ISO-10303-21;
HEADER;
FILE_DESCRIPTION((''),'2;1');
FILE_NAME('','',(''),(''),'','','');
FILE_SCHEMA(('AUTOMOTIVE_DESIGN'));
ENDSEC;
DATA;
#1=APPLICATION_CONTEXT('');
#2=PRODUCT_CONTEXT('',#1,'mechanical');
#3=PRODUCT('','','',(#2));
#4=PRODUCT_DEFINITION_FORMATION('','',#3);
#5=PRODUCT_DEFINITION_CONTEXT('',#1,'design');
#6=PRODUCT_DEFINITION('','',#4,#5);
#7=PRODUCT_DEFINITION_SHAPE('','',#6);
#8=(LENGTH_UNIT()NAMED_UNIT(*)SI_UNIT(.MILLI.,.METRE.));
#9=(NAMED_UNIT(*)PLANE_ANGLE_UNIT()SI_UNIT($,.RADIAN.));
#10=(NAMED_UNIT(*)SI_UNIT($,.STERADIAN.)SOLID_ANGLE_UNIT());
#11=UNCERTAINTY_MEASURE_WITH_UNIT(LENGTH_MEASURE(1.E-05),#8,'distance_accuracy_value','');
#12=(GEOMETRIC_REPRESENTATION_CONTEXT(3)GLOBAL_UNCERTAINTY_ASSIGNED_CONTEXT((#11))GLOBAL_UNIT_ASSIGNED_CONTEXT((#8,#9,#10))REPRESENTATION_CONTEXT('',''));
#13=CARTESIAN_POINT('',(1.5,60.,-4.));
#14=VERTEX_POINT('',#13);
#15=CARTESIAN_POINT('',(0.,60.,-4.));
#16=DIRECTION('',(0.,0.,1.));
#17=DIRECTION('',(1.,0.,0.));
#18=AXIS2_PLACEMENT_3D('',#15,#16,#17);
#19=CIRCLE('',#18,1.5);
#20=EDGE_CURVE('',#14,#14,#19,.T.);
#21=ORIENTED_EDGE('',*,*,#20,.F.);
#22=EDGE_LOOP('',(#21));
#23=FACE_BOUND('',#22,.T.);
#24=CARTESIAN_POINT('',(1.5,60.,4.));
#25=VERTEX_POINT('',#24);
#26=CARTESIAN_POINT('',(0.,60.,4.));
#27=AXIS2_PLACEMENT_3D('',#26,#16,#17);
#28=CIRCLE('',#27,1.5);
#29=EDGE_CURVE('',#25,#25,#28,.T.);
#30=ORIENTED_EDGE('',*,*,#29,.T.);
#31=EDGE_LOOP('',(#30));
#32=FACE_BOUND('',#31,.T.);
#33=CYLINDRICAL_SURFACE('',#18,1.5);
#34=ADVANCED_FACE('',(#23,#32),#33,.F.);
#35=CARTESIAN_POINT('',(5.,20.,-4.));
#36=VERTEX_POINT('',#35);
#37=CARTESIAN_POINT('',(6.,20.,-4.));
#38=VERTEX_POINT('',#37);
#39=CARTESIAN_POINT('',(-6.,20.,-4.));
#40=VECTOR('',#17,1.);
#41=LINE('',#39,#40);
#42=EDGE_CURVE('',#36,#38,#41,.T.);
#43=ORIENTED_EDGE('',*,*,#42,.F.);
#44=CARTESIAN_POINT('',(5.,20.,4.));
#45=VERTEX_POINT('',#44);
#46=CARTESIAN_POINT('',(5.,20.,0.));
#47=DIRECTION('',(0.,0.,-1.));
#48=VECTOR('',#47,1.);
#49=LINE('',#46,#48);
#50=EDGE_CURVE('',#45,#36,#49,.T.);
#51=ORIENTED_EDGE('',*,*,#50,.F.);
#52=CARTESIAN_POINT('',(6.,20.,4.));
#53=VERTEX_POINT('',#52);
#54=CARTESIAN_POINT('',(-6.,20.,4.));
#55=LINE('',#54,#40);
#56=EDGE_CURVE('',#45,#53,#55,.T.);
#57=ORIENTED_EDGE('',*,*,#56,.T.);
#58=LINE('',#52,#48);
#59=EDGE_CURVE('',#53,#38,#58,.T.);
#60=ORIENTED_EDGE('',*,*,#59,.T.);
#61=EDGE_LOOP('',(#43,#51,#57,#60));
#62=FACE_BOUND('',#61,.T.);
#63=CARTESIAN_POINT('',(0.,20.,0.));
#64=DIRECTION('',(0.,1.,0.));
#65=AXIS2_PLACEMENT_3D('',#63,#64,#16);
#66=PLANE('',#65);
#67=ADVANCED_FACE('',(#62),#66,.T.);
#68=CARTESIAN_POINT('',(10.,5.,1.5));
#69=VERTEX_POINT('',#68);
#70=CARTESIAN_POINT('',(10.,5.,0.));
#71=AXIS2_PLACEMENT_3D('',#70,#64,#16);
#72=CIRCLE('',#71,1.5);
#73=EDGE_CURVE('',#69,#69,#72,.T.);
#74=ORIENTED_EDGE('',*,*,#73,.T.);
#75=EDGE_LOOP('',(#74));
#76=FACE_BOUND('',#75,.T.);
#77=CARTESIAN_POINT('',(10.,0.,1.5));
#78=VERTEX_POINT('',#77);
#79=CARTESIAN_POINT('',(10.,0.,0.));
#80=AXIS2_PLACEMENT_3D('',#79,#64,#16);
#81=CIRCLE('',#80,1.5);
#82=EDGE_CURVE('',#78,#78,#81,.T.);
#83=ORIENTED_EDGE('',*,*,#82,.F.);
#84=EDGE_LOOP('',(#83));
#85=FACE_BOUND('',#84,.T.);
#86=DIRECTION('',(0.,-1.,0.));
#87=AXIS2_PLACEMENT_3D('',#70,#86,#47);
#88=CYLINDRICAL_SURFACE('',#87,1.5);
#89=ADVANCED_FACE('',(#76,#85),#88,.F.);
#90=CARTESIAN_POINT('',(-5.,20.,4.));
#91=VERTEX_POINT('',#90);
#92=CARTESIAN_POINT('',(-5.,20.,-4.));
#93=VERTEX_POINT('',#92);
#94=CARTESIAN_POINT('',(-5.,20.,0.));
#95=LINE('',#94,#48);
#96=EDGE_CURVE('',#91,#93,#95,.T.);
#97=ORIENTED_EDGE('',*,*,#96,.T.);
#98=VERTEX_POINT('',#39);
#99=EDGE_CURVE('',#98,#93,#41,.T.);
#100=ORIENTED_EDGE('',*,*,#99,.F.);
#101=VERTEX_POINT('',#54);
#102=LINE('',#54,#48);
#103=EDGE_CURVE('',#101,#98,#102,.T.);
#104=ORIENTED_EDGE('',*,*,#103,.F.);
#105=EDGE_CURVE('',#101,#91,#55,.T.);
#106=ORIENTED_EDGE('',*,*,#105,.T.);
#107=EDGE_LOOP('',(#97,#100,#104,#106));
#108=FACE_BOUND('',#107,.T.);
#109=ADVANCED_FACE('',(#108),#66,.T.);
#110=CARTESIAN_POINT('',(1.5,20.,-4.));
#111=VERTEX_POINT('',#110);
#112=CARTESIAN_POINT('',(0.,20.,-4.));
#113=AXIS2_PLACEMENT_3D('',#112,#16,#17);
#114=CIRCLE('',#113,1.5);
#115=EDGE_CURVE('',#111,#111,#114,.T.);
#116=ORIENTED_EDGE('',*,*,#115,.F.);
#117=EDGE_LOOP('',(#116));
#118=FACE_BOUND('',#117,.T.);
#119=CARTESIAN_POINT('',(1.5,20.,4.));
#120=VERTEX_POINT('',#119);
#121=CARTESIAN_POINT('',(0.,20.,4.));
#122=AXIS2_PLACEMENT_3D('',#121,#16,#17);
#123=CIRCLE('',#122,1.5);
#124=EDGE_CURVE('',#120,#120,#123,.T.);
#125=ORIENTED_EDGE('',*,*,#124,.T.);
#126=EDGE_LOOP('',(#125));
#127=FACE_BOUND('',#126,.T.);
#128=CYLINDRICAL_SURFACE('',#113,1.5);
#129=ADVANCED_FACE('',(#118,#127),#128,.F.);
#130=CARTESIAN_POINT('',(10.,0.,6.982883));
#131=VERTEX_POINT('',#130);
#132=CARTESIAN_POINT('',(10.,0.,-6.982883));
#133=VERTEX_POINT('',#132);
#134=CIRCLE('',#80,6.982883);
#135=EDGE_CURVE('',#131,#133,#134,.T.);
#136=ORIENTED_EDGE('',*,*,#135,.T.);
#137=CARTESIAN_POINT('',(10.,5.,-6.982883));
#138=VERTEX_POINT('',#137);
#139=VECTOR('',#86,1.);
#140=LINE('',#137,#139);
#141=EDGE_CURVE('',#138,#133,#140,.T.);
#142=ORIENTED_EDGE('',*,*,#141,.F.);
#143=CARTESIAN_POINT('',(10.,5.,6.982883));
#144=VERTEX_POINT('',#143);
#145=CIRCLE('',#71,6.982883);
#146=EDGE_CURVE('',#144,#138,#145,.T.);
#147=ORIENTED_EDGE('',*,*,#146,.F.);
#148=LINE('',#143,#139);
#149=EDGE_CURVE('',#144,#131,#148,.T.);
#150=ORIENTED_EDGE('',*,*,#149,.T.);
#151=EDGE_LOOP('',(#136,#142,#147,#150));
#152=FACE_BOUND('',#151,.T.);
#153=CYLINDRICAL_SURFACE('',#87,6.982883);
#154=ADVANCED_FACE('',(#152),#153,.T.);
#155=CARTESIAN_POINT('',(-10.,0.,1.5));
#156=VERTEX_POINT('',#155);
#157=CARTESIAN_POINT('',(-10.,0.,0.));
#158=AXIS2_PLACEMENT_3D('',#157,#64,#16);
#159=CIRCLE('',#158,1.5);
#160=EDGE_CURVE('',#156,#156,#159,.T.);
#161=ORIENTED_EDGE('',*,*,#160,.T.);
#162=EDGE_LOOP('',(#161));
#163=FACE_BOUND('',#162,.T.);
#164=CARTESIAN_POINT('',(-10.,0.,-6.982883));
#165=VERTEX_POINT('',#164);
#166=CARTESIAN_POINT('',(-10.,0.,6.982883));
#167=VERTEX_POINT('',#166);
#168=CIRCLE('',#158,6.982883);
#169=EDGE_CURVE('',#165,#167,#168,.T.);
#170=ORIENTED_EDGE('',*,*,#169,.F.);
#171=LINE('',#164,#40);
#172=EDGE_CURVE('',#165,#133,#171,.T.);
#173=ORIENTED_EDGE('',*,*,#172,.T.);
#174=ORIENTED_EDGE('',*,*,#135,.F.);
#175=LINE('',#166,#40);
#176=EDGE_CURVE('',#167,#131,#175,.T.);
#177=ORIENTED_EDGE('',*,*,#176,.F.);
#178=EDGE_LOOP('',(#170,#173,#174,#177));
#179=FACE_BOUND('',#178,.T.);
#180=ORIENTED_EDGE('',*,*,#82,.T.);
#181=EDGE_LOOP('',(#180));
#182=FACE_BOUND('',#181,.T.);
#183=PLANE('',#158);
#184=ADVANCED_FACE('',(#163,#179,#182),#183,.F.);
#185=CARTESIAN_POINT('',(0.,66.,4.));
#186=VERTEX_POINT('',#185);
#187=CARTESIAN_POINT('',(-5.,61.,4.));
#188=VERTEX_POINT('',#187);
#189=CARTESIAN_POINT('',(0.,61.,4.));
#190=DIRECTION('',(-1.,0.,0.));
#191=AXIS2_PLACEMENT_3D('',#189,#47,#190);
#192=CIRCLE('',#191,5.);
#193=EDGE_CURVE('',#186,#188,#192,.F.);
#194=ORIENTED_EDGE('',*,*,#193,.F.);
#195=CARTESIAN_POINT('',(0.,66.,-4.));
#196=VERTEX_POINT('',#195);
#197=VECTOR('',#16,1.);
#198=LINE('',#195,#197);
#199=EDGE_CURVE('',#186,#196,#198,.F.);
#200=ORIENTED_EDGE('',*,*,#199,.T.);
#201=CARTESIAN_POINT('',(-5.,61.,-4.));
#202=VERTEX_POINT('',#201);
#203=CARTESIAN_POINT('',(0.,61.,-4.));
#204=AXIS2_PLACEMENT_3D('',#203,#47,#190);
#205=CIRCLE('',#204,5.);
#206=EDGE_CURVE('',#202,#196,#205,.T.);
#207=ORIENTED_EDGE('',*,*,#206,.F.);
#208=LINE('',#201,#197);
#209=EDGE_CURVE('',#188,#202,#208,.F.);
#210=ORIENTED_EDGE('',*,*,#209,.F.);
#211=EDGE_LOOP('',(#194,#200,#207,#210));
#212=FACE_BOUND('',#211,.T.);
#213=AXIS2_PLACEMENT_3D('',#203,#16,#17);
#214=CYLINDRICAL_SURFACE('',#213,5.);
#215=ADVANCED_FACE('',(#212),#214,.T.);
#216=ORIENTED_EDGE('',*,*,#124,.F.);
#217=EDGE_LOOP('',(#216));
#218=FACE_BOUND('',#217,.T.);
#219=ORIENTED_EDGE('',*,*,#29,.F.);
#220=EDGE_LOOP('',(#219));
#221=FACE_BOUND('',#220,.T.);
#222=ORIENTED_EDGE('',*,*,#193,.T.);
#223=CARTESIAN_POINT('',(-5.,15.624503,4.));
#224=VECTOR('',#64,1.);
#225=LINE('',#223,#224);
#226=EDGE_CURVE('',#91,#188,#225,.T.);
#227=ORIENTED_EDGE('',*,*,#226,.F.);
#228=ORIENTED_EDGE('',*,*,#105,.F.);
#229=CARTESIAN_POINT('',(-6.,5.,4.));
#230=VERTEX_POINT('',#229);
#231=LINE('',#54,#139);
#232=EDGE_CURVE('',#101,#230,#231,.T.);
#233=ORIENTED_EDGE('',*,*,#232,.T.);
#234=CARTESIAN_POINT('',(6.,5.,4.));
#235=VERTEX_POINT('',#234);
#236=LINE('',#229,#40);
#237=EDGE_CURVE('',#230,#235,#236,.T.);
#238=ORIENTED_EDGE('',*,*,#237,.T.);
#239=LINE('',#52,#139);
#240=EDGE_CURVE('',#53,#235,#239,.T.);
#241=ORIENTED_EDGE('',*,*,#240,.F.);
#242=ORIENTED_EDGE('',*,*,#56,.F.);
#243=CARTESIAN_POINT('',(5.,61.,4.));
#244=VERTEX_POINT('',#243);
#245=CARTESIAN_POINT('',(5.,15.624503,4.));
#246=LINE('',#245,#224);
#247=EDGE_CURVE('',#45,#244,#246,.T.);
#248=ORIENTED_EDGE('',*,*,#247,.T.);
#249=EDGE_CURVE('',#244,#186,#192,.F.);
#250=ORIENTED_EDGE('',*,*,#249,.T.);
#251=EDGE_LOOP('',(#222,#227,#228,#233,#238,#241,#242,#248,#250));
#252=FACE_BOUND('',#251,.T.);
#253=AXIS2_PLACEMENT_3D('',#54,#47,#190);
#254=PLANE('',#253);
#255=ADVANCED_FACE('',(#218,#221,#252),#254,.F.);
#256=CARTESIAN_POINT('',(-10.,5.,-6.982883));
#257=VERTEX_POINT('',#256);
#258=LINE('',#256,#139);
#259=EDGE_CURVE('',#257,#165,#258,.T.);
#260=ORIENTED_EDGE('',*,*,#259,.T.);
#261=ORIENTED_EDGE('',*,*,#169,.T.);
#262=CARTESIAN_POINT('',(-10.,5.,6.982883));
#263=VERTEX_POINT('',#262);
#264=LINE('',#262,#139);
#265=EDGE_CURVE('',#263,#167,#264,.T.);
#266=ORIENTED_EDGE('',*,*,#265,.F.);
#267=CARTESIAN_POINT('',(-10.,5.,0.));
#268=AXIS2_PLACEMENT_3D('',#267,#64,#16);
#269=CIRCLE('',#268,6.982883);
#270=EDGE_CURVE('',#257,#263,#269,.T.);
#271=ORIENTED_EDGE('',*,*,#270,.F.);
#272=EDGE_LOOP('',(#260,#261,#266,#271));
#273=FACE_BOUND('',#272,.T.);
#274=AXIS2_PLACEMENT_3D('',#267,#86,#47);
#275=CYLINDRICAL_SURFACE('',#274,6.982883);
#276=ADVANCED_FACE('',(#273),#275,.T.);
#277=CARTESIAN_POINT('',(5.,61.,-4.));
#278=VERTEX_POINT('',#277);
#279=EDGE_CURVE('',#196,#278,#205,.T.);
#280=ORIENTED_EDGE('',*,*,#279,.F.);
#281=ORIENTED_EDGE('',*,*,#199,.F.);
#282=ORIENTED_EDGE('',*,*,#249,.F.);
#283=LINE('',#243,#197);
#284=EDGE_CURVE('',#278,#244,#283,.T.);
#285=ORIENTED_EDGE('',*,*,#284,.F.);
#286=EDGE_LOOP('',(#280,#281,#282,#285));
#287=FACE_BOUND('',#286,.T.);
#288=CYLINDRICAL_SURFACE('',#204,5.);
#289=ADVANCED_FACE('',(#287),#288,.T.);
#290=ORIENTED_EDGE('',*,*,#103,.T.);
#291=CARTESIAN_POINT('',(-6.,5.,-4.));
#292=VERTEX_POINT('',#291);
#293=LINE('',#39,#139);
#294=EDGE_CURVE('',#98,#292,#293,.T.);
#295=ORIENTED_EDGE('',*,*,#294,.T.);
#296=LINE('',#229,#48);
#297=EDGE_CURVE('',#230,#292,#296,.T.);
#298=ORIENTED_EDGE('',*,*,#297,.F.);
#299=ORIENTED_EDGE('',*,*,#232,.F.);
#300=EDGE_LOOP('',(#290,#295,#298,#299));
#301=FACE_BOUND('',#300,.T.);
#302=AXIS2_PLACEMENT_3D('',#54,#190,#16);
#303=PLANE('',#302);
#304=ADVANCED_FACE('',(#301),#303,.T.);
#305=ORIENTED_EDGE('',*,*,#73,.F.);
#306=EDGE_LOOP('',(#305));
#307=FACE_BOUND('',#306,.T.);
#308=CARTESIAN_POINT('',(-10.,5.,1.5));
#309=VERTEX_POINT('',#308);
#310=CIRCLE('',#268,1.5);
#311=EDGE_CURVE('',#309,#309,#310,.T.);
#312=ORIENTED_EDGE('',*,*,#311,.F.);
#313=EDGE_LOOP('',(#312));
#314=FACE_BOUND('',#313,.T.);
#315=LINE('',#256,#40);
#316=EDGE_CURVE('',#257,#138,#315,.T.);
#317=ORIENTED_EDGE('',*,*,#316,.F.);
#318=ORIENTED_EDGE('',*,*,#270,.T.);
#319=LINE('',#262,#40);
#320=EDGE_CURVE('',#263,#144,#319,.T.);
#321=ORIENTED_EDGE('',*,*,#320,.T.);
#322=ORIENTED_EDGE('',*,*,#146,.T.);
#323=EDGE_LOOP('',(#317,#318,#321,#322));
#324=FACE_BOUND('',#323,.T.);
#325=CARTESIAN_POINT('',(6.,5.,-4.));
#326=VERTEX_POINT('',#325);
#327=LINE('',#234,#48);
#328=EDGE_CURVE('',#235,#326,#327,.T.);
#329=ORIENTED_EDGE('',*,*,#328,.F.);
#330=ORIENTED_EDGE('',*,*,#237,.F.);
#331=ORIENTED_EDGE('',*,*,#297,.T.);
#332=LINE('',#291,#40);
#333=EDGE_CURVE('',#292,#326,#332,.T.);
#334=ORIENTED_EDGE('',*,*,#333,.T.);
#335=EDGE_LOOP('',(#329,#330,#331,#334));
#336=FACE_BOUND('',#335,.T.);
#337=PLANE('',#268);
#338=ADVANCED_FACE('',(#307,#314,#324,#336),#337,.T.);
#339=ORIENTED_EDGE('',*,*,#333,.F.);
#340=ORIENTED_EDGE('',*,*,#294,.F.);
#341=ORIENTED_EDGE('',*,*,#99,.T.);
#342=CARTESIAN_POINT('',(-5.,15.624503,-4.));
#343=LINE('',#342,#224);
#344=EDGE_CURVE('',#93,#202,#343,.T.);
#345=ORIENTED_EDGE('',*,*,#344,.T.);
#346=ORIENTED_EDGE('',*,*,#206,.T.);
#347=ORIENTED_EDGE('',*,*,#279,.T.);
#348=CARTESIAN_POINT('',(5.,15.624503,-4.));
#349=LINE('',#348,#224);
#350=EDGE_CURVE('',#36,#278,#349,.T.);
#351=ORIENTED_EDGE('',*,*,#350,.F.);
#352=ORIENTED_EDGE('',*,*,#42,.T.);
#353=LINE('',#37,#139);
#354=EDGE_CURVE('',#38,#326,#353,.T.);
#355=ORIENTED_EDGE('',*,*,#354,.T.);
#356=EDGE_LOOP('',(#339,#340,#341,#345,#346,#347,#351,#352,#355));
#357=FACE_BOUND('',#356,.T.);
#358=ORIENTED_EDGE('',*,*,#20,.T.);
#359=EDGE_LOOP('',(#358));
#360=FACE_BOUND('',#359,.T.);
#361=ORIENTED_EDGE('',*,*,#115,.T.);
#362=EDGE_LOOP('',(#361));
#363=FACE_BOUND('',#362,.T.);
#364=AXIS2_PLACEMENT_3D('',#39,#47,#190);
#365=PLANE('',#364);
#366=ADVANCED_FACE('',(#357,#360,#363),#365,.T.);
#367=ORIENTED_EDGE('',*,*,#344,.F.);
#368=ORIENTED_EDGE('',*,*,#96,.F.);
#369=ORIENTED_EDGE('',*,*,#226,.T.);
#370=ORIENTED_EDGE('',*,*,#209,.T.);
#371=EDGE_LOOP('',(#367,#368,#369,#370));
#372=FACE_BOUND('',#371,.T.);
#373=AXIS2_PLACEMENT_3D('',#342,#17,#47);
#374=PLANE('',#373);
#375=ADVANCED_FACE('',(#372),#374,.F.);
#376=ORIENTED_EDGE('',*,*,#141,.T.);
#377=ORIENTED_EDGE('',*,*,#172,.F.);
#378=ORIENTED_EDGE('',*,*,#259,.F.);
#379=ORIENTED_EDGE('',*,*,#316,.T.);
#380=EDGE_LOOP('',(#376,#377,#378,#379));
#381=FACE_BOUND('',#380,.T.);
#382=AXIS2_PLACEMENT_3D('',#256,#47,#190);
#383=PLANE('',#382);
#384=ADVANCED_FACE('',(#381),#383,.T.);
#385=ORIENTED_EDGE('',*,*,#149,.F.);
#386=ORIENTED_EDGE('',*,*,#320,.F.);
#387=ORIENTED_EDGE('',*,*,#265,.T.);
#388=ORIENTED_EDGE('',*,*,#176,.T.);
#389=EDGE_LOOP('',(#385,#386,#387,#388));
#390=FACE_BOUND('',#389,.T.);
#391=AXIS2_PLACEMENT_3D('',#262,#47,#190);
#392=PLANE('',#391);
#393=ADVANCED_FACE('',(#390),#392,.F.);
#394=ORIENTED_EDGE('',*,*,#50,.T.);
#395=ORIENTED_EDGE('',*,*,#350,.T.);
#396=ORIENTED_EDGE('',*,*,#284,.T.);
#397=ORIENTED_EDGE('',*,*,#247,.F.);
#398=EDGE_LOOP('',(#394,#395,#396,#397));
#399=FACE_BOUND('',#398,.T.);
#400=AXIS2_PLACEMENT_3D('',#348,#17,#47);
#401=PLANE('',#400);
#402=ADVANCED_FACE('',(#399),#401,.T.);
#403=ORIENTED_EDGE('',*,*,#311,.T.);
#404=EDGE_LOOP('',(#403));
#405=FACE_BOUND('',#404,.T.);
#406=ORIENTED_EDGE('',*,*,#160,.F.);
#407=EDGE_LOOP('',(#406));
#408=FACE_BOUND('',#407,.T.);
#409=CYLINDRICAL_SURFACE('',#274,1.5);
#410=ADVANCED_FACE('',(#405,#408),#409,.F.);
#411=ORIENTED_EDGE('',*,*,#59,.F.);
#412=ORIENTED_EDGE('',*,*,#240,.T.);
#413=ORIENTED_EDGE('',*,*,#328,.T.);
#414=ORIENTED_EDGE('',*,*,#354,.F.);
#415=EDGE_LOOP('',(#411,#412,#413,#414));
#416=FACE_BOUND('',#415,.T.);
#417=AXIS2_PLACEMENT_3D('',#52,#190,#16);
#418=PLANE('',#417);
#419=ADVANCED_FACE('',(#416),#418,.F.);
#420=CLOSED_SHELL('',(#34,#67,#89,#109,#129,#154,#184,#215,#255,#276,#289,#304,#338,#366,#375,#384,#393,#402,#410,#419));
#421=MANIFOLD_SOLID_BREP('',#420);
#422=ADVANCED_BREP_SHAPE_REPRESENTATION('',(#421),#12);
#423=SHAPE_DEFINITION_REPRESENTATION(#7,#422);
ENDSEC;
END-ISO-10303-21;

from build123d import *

# Parameters (mm, degrees)
SKETCH1_R           = 1.5
BOSS_EXTRUDE1_DEPTH = 5
SKETCH3_W           = 12
SKETCH3_H           = 8
BOSS_EXTRUDE3_DEPTH = 15
BOSS_EXTRUDE4_START = -8
SKETCH4_W           = 10
SKETCH4_H           = 50.375497142
SKETCH4_R           = 1.5
BOSS_EXTRUDE4_DEPTH = 8
FILLET1_R           = 5
CUT_EXTRUDE1_START  = -8
SKETCH5_R           = 1.5
CUT_EXTRUDE1_DEPTH  = 8


with BuildPart() as part:
    # Sketch1 → Boss-Extrude1 (new body)
    with BuildSketch(Plane(origin=(0, 0, 0), x_dir=(1, 0, 0), z_dir=(0, 1, 0))):
        with BuildLine():
            Line((-10, 6.982882733), (10, 6.982882733))
            ThreePointArc((10, 6.982882733), (16.982882733, 0), (10, -6.982882733))
            Line((10, -6.982882733), (-10, -6.982882733))
            ThreePointArc((-10, -6.982882733), (-16.982882733, 0), (-10, 6.982882733))
        make_face()
        with Locations(Location((-10, 0, 0), (0, 0, 270))):
            Circle(SKETCH1_R, mode=Mode.SUBTRACT)
        with Locations(Location((10, 0, 0), (0, 0, 270))):
            Circle(SKETCH1_R, mode=Mode.SUBTRACT)
    extrude(amount=BOSS_EXTRUDE1_DEPTH)

    # Sketch3 → Boss-Extrude3 (add)
    with BuildSketch(Plane(origin=(0, 5, 0), x_dir=(1, 0, 0), z_dir=(0, 1, 0))):
        Rectangle(SKETCH3_W, SKETCH3_H)
    extrude(amount=BOSS_EXTRUDE3_DEPTH)

    # Sketch4 → Boss-Extrude4 (add)
    with BuildSketch(Plane.XY.offset(4).offset(BOSS_EXTRUDE4_START)):
        with Locations((0, 40.812251429)):
            Rectangle(SKETCH4_W, SKETCH4_H)
        with Locations((0, 20)):
            Circle(SKETCH4_R, mode=Mode.SUBTRACT)
        with Locations((0, 60)):
            Circle(SKETCH4_R, mode=Mode.SUBTRACT)
    extrude(amount=BOSS_EXTRUDE4_DEPTH)

    # Fillet1
    fillet1_edges = [part.edges().sort_by_distance(p)[0] for p in [
        (-5, 66, 0),
        (5, 66, 0),
    ]]
    fillet(fillet1_edges, radius=FILLET1_R - 0.0001)  # a hair under: the kernel refuses the full size

    # Sketch5 → Cut-Extrude1 (cut)
    with BuildSketch(Plane.XY.offset(4).offset(CUT_EXTRUDE1_START)):
        with Locations((0, 20)):
            Circle(SKETCH5_R)
    extrude(amount=CUT_EXTRUDE1_DEPTH, mode=Mode.SUBTRACT)


solid = part.part
